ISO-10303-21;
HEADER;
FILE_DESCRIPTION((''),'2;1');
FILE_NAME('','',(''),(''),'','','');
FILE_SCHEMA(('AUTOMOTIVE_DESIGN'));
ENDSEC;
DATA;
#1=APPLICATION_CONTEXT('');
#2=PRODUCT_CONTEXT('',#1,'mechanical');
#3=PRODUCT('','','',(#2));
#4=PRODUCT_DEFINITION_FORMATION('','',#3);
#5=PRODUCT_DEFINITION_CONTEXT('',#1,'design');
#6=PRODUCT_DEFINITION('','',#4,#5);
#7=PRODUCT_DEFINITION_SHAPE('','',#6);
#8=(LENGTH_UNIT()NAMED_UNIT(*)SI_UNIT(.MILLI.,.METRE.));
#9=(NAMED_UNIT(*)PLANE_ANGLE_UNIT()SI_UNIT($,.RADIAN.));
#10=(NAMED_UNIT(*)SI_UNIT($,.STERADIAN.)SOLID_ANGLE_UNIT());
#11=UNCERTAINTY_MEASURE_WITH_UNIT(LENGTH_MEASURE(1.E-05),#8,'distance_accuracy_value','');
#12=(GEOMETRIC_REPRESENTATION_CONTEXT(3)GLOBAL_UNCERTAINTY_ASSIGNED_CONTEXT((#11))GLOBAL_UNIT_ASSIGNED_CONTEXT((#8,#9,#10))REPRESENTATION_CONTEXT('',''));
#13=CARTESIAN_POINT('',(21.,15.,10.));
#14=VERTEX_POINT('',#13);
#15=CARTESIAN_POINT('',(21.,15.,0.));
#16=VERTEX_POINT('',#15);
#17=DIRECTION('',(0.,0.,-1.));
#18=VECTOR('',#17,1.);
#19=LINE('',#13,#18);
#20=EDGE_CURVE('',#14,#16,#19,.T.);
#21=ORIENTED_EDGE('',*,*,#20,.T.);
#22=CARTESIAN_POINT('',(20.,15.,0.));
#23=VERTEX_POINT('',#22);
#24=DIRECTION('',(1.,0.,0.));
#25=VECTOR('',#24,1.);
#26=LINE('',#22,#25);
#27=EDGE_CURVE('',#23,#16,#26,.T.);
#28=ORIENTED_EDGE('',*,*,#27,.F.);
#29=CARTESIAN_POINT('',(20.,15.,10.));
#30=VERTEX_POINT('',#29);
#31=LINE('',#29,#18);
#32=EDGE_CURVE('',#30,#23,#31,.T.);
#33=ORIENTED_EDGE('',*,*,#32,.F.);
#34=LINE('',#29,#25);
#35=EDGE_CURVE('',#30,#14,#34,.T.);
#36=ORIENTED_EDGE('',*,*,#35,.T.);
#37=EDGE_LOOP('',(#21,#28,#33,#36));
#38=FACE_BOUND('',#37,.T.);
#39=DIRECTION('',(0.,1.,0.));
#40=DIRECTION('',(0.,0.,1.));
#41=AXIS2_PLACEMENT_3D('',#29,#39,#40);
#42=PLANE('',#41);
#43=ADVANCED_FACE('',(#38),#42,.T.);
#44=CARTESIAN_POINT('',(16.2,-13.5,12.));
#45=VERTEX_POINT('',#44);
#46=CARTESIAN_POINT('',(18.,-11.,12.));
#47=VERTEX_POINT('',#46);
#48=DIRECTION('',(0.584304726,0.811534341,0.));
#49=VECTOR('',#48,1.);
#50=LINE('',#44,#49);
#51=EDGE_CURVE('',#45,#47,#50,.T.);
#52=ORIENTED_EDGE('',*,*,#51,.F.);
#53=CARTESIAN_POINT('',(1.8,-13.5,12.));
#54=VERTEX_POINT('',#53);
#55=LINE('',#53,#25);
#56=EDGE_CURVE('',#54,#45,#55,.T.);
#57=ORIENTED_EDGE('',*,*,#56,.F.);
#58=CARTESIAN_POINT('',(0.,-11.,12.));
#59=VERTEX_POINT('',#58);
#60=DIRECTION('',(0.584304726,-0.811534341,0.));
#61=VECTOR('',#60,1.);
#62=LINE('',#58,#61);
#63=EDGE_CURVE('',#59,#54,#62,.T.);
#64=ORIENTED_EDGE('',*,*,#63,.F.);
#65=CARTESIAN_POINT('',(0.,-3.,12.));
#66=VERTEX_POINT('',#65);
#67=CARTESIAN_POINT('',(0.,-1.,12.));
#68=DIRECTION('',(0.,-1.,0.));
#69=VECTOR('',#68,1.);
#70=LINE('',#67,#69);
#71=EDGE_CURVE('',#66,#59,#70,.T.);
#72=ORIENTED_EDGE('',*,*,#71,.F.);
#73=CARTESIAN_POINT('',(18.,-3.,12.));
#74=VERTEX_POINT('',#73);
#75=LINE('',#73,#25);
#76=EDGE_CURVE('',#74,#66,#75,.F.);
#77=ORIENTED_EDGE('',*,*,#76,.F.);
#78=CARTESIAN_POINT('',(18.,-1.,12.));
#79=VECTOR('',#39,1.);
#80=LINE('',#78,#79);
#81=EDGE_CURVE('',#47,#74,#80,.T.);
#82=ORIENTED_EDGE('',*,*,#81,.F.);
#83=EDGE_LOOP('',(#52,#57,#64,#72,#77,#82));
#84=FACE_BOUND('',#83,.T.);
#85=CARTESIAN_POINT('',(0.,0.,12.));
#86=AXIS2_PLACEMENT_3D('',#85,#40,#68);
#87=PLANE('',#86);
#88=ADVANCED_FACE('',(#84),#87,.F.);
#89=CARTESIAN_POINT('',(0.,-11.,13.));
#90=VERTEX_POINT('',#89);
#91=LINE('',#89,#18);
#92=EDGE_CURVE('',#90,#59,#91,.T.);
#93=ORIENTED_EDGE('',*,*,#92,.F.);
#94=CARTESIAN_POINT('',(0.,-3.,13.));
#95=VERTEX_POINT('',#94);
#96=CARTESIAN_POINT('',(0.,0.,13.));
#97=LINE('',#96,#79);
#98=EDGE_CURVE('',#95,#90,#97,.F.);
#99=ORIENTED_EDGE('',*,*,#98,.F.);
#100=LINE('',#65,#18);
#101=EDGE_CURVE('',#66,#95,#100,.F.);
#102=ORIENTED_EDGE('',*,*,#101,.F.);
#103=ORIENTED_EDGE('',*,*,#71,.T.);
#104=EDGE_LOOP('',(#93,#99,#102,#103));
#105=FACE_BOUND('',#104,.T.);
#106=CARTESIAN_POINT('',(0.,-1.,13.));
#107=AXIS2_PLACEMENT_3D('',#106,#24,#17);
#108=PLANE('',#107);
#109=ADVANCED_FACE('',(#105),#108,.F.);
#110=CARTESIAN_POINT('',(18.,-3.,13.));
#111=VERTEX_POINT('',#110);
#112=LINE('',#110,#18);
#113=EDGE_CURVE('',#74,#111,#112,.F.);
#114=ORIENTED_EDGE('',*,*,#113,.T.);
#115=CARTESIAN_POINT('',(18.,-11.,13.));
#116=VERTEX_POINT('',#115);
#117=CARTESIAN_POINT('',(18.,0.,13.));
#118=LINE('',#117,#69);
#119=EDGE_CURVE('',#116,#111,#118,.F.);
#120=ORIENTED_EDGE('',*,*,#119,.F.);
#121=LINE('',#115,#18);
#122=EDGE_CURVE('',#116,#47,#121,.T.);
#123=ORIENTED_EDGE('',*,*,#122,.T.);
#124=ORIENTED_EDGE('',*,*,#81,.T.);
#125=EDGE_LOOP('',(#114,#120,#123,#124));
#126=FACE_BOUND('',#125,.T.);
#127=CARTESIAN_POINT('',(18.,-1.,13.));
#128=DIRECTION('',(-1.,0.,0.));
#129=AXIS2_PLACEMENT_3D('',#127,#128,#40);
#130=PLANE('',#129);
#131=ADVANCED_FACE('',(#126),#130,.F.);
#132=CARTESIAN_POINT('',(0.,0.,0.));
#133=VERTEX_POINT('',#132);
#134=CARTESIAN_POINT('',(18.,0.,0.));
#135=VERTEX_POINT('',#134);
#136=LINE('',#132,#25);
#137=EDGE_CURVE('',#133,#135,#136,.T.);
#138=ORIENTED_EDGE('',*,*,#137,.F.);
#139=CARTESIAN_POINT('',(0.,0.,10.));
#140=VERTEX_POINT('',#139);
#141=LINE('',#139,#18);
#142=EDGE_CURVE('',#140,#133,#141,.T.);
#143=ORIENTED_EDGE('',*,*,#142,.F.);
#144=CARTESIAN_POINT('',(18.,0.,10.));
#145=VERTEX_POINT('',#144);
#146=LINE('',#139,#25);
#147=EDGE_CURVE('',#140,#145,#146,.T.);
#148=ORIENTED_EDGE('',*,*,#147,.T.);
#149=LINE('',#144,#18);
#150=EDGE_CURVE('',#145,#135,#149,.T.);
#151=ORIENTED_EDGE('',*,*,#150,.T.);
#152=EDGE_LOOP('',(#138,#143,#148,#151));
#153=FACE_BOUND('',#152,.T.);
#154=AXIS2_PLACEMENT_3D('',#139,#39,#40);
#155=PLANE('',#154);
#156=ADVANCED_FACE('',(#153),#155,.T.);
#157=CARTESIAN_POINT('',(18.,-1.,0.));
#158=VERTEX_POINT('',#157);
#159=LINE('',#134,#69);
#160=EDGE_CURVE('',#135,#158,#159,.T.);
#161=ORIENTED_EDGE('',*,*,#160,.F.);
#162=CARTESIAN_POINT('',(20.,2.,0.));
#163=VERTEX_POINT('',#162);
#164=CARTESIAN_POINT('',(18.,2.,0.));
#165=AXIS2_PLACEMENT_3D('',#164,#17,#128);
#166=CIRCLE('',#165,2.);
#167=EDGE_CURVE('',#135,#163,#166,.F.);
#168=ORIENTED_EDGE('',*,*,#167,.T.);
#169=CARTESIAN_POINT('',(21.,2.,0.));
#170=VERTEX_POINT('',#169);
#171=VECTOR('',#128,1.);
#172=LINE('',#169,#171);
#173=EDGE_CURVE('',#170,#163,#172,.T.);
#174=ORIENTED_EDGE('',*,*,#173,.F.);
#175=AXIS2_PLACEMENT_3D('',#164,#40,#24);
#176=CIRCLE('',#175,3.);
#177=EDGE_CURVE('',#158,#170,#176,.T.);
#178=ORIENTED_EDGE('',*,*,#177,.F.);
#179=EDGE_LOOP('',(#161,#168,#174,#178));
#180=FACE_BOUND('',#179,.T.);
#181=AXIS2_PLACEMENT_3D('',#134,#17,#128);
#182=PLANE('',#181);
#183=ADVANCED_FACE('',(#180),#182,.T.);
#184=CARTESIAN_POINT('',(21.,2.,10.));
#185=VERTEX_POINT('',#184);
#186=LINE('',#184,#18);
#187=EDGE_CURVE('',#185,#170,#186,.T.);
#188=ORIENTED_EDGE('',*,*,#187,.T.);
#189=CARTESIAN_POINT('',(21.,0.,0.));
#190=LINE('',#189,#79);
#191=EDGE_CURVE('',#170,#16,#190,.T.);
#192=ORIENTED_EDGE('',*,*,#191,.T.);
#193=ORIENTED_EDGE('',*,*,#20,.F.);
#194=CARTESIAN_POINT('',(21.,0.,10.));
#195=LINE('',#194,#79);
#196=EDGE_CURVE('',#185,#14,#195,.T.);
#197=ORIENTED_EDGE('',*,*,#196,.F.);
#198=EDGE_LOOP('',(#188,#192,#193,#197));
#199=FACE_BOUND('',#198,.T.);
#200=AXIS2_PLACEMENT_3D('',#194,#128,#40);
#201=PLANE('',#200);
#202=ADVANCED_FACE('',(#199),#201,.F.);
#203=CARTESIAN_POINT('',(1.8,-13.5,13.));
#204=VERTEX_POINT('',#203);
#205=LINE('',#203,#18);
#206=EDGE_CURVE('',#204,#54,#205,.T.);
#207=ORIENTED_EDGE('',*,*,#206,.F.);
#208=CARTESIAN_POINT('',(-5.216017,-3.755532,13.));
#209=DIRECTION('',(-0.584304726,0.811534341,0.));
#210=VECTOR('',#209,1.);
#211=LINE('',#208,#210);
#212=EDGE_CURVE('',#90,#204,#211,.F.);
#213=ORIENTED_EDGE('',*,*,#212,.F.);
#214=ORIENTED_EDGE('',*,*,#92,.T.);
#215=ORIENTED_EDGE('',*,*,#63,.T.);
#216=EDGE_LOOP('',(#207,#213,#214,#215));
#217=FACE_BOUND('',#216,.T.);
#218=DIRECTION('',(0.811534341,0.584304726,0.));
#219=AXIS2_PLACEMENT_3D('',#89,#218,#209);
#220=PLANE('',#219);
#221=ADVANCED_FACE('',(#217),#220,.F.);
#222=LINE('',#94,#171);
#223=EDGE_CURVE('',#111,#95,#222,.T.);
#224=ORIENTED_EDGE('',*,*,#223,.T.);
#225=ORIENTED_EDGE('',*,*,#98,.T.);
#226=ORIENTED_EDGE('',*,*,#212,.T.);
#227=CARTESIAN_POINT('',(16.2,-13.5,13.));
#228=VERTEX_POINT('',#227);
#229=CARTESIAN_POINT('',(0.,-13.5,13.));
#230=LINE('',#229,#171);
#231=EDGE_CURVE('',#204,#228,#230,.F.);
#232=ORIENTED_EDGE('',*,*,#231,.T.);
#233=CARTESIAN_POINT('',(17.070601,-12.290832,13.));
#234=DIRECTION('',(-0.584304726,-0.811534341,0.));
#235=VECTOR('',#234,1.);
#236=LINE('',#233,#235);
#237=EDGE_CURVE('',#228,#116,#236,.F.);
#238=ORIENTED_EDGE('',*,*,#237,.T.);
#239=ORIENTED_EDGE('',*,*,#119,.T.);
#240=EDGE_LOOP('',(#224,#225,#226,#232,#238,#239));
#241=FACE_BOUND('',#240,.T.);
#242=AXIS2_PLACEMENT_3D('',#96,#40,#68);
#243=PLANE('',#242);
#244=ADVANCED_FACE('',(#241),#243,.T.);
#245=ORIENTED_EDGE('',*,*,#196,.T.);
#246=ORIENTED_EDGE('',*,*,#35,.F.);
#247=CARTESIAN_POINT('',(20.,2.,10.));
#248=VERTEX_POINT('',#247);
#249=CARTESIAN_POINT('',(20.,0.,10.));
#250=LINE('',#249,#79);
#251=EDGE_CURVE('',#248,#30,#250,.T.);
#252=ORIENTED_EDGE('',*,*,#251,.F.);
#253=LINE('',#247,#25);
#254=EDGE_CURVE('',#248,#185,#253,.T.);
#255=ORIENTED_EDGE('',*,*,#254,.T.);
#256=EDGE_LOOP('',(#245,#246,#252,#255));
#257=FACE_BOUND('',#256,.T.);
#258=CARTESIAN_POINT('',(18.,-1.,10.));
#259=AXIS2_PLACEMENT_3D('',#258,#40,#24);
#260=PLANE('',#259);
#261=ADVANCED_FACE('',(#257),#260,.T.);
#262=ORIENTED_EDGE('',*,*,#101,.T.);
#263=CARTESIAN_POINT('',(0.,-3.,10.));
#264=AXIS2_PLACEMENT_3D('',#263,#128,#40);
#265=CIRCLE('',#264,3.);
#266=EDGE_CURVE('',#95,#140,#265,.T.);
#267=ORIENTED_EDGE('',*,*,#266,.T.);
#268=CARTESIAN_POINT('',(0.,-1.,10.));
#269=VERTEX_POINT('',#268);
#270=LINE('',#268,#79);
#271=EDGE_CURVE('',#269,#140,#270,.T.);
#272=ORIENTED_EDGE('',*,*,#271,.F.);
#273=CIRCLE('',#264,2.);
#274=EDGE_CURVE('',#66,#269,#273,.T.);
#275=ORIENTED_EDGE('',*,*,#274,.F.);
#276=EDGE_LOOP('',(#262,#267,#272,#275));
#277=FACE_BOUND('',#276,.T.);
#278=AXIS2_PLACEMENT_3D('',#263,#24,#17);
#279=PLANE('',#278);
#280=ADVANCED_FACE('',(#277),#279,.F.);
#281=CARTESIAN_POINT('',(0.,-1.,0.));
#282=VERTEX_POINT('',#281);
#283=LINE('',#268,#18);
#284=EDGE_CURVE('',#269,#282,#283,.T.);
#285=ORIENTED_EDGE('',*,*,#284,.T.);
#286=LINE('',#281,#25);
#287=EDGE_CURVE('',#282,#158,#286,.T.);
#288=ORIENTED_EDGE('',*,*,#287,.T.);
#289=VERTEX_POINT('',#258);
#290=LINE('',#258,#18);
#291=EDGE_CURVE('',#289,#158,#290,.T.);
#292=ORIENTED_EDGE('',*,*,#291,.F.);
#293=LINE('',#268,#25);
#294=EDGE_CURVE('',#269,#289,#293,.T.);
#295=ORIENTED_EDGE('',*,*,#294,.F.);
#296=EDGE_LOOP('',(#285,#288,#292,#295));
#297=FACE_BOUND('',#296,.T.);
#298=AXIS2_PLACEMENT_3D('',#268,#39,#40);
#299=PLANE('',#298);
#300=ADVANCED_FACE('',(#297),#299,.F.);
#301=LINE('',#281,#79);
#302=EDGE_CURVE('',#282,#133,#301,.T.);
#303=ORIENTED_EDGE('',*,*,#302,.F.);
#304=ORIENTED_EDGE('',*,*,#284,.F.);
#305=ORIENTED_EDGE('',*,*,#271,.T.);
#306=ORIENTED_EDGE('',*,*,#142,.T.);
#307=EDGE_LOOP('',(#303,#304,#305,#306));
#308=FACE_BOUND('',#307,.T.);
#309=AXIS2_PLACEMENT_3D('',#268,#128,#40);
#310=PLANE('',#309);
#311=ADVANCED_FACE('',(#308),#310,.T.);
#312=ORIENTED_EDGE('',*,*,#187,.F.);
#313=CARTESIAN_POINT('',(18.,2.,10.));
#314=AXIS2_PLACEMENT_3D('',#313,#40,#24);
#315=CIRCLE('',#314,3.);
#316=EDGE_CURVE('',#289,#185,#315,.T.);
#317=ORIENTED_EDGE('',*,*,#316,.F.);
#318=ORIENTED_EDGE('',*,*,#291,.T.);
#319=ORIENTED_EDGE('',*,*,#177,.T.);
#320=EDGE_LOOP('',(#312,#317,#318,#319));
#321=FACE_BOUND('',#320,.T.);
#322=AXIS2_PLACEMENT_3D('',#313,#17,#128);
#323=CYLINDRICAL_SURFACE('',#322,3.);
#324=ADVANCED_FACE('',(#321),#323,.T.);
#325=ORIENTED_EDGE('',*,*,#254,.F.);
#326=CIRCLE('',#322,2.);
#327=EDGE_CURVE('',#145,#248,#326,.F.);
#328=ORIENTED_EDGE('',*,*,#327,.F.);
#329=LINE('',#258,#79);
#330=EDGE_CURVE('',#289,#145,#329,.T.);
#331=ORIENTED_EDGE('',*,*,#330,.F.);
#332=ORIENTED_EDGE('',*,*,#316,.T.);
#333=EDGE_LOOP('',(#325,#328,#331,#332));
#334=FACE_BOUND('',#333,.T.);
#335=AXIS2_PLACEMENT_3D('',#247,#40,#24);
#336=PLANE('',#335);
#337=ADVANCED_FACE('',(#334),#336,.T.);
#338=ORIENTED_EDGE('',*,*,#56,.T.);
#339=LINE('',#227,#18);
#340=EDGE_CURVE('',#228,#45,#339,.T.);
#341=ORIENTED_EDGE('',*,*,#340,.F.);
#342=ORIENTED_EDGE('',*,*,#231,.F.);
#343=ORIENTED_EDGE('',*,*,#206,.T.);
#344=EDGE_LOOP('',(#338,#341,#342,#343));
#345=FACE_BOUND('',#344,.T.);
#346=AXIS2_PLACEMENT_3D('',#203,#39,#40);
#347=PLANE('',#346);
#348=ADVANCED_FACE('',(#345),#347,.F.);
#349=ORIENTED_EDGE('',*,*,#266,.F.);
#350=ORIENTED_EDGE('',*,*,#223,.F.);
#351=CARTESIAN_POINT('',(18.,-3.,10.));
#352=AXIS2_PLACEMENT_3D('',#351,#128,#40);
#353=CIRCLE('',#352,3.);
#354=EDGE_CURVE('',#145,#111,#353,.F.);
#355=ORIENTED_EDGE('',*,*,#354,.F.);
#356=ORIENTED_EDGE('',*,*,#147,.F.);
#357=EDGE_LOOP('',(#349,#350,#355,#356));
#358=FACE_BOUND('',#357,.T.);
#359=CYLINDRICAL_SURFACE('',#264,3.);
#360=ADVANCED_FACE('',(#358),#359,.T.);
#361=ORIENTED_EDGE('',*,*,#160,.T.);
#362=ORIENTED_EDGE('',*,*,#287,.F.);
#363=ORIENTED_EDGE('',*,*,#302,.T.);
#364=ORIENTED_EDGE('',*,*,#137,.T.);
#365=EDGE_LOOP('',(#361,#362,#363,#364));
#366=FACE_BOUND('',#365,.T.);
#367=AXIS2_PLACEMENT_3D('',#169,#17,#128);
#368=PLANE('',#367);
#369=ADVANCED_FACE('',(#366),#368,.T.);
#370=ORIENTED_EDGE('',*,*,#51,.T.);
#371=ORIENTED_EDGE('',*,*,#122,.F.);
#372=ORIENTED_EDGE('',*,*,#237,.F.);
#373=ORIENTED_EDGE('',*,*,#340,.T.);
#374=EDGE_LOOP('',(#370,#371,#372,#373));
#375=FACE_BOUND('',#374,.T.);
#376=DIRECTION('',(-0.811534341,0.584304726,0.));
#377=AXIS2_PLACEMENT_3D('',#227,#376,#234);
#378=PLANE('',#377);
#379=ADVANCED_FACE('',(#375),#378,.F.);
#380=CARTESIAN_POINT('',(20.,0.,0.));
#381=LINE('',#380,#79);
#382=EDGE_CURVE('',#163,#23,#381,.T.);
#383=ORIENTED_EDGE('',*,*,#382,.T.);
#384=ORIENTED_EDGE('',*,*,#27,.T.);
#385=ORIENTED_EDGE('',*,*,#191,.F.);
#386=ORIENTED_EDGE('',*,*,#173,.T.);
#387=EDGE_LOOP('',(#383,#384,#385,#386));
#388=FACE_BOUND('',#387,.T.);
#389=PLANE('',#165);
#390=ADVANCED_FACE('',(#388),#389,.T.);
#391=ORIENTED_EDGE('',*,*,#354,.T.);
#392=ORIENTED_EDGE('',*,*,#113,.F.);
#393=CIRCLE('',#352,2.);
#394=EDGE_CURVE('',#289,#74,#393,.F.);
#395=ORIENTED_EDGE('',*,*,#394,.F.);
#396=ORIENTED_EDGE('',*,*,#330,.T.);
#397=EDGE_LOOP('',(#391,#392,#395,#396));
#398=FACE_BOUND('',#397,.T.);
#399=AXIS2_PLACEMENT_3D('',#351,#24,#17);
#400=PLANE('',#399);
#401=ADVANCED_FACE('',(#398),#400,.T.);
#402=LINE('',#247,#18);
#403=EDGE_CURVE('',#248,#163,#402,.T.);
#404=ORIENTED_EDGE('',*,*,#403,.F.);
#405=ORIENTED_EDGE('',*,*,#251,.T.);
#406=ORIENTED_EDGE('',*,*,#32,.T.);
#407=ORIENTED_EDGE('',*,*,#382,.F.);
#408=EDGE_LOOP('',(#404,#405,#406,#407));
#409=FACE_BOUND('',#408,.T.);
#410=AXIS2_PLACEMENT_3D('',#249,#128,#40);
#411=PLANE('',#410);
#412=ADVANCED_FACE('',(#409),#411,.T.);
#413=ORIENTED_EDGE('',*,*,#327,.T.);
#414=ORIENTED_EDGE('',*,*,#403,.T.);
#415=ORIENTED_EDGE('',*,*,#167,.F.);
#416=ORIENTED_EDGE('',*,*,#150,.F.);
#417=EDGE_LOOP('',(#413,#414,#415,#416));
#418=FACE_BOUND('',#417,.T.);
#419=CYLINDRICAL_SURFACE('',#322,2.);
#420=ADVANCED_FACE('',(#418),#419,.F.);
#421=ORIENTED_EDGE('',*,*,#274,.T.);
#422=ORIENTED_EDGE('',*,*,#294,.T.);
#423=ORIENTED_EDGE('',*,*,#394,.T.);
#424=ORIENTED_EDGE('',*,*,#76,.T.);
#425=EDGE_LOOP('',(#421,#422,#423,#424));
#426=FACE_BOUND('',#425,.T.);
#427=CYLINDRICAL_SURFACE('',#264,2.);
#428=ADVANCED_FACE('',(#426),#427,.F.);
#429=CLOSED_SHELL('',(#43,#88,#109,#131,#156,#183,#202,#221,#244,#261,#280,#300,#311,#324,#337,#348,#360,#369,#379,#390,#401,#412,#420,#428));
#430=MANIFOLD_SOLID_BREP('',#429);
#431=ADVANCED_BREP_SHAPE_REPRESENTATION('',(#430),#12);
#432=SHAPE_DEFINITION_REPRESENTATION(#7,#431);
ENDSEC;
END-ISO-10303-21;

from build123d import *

# Parameters (mm, degrees)
SM_BASE_FLANGE_1_DEPTH      = 10
SM_EDGE_FLANGE_2_DEPTH      = 18
SM_START                    = 1
SM_EDGE_FLANGE_2_FLAT_DEPTH = 1


# Sheet-metal steps are written as plain solids
with BuildPart() as part:
    # Sketch 1 → 基体-法兰1 (new body)
    with BuildSketch(Plane.XY):
        with BuildLine():
            Line((0, 0), (18, 0))
            ThreePointArc((18, 0), (19.414213562, 0.585786438), (20, 2))
            Line((20, 2), (20, 15))
            Line((20, 15), (21, 15))
            Line((21, 15), (21, 2))
            ThreePointArc((21, 2), (20.121320344, -0.121320344), (18, -1))
            Line((18, -1), (0, -1))
            Line((0, -1), (0, 0))
        make_face()
    extrude(amount=SM_BASE_FLANGE_1_DEPTH)

    # 边线-法兰2 bend section (across the edge) → 边线-法兰2 (add)
    with BuildSketch(Plane(origin=(18, -1, 12), x_dir=(0, 0, -1), z_dir=(-1, 0, 0))):
        with BuildLine():
            Line((-1, 2), (0, 2))
            ThreePointArc((0, 2), (0.585786438, 0.585786438), (2, 0))
            Line((2, 0), (2, -1))
            ThreePointArc((2, -1), (-0.121320344, -0.121320344), (-1, 2))
        make_face()
    extrude(amount=SM_EDGE_FLANGE_2_DEPTH)

    # 边线-法兰2 profile (on flange) → 边线-法兰2 flat (add)
    with BuildSketch(Plane(origin=(0, -1, 12), x_dir=(-1, 0, 0), z_dir=(0, 0, 1)).offset(SM_START)):
        Polygon((0, 2), (0, 10), (-1.8, 12.5), (-16.2, 12.5), (-18, 10), (-18, 2), align=None)
    extrude(amount=-SM_EDGE_FLANGE_2_FLAT_DEPTH)


solid = part.part
